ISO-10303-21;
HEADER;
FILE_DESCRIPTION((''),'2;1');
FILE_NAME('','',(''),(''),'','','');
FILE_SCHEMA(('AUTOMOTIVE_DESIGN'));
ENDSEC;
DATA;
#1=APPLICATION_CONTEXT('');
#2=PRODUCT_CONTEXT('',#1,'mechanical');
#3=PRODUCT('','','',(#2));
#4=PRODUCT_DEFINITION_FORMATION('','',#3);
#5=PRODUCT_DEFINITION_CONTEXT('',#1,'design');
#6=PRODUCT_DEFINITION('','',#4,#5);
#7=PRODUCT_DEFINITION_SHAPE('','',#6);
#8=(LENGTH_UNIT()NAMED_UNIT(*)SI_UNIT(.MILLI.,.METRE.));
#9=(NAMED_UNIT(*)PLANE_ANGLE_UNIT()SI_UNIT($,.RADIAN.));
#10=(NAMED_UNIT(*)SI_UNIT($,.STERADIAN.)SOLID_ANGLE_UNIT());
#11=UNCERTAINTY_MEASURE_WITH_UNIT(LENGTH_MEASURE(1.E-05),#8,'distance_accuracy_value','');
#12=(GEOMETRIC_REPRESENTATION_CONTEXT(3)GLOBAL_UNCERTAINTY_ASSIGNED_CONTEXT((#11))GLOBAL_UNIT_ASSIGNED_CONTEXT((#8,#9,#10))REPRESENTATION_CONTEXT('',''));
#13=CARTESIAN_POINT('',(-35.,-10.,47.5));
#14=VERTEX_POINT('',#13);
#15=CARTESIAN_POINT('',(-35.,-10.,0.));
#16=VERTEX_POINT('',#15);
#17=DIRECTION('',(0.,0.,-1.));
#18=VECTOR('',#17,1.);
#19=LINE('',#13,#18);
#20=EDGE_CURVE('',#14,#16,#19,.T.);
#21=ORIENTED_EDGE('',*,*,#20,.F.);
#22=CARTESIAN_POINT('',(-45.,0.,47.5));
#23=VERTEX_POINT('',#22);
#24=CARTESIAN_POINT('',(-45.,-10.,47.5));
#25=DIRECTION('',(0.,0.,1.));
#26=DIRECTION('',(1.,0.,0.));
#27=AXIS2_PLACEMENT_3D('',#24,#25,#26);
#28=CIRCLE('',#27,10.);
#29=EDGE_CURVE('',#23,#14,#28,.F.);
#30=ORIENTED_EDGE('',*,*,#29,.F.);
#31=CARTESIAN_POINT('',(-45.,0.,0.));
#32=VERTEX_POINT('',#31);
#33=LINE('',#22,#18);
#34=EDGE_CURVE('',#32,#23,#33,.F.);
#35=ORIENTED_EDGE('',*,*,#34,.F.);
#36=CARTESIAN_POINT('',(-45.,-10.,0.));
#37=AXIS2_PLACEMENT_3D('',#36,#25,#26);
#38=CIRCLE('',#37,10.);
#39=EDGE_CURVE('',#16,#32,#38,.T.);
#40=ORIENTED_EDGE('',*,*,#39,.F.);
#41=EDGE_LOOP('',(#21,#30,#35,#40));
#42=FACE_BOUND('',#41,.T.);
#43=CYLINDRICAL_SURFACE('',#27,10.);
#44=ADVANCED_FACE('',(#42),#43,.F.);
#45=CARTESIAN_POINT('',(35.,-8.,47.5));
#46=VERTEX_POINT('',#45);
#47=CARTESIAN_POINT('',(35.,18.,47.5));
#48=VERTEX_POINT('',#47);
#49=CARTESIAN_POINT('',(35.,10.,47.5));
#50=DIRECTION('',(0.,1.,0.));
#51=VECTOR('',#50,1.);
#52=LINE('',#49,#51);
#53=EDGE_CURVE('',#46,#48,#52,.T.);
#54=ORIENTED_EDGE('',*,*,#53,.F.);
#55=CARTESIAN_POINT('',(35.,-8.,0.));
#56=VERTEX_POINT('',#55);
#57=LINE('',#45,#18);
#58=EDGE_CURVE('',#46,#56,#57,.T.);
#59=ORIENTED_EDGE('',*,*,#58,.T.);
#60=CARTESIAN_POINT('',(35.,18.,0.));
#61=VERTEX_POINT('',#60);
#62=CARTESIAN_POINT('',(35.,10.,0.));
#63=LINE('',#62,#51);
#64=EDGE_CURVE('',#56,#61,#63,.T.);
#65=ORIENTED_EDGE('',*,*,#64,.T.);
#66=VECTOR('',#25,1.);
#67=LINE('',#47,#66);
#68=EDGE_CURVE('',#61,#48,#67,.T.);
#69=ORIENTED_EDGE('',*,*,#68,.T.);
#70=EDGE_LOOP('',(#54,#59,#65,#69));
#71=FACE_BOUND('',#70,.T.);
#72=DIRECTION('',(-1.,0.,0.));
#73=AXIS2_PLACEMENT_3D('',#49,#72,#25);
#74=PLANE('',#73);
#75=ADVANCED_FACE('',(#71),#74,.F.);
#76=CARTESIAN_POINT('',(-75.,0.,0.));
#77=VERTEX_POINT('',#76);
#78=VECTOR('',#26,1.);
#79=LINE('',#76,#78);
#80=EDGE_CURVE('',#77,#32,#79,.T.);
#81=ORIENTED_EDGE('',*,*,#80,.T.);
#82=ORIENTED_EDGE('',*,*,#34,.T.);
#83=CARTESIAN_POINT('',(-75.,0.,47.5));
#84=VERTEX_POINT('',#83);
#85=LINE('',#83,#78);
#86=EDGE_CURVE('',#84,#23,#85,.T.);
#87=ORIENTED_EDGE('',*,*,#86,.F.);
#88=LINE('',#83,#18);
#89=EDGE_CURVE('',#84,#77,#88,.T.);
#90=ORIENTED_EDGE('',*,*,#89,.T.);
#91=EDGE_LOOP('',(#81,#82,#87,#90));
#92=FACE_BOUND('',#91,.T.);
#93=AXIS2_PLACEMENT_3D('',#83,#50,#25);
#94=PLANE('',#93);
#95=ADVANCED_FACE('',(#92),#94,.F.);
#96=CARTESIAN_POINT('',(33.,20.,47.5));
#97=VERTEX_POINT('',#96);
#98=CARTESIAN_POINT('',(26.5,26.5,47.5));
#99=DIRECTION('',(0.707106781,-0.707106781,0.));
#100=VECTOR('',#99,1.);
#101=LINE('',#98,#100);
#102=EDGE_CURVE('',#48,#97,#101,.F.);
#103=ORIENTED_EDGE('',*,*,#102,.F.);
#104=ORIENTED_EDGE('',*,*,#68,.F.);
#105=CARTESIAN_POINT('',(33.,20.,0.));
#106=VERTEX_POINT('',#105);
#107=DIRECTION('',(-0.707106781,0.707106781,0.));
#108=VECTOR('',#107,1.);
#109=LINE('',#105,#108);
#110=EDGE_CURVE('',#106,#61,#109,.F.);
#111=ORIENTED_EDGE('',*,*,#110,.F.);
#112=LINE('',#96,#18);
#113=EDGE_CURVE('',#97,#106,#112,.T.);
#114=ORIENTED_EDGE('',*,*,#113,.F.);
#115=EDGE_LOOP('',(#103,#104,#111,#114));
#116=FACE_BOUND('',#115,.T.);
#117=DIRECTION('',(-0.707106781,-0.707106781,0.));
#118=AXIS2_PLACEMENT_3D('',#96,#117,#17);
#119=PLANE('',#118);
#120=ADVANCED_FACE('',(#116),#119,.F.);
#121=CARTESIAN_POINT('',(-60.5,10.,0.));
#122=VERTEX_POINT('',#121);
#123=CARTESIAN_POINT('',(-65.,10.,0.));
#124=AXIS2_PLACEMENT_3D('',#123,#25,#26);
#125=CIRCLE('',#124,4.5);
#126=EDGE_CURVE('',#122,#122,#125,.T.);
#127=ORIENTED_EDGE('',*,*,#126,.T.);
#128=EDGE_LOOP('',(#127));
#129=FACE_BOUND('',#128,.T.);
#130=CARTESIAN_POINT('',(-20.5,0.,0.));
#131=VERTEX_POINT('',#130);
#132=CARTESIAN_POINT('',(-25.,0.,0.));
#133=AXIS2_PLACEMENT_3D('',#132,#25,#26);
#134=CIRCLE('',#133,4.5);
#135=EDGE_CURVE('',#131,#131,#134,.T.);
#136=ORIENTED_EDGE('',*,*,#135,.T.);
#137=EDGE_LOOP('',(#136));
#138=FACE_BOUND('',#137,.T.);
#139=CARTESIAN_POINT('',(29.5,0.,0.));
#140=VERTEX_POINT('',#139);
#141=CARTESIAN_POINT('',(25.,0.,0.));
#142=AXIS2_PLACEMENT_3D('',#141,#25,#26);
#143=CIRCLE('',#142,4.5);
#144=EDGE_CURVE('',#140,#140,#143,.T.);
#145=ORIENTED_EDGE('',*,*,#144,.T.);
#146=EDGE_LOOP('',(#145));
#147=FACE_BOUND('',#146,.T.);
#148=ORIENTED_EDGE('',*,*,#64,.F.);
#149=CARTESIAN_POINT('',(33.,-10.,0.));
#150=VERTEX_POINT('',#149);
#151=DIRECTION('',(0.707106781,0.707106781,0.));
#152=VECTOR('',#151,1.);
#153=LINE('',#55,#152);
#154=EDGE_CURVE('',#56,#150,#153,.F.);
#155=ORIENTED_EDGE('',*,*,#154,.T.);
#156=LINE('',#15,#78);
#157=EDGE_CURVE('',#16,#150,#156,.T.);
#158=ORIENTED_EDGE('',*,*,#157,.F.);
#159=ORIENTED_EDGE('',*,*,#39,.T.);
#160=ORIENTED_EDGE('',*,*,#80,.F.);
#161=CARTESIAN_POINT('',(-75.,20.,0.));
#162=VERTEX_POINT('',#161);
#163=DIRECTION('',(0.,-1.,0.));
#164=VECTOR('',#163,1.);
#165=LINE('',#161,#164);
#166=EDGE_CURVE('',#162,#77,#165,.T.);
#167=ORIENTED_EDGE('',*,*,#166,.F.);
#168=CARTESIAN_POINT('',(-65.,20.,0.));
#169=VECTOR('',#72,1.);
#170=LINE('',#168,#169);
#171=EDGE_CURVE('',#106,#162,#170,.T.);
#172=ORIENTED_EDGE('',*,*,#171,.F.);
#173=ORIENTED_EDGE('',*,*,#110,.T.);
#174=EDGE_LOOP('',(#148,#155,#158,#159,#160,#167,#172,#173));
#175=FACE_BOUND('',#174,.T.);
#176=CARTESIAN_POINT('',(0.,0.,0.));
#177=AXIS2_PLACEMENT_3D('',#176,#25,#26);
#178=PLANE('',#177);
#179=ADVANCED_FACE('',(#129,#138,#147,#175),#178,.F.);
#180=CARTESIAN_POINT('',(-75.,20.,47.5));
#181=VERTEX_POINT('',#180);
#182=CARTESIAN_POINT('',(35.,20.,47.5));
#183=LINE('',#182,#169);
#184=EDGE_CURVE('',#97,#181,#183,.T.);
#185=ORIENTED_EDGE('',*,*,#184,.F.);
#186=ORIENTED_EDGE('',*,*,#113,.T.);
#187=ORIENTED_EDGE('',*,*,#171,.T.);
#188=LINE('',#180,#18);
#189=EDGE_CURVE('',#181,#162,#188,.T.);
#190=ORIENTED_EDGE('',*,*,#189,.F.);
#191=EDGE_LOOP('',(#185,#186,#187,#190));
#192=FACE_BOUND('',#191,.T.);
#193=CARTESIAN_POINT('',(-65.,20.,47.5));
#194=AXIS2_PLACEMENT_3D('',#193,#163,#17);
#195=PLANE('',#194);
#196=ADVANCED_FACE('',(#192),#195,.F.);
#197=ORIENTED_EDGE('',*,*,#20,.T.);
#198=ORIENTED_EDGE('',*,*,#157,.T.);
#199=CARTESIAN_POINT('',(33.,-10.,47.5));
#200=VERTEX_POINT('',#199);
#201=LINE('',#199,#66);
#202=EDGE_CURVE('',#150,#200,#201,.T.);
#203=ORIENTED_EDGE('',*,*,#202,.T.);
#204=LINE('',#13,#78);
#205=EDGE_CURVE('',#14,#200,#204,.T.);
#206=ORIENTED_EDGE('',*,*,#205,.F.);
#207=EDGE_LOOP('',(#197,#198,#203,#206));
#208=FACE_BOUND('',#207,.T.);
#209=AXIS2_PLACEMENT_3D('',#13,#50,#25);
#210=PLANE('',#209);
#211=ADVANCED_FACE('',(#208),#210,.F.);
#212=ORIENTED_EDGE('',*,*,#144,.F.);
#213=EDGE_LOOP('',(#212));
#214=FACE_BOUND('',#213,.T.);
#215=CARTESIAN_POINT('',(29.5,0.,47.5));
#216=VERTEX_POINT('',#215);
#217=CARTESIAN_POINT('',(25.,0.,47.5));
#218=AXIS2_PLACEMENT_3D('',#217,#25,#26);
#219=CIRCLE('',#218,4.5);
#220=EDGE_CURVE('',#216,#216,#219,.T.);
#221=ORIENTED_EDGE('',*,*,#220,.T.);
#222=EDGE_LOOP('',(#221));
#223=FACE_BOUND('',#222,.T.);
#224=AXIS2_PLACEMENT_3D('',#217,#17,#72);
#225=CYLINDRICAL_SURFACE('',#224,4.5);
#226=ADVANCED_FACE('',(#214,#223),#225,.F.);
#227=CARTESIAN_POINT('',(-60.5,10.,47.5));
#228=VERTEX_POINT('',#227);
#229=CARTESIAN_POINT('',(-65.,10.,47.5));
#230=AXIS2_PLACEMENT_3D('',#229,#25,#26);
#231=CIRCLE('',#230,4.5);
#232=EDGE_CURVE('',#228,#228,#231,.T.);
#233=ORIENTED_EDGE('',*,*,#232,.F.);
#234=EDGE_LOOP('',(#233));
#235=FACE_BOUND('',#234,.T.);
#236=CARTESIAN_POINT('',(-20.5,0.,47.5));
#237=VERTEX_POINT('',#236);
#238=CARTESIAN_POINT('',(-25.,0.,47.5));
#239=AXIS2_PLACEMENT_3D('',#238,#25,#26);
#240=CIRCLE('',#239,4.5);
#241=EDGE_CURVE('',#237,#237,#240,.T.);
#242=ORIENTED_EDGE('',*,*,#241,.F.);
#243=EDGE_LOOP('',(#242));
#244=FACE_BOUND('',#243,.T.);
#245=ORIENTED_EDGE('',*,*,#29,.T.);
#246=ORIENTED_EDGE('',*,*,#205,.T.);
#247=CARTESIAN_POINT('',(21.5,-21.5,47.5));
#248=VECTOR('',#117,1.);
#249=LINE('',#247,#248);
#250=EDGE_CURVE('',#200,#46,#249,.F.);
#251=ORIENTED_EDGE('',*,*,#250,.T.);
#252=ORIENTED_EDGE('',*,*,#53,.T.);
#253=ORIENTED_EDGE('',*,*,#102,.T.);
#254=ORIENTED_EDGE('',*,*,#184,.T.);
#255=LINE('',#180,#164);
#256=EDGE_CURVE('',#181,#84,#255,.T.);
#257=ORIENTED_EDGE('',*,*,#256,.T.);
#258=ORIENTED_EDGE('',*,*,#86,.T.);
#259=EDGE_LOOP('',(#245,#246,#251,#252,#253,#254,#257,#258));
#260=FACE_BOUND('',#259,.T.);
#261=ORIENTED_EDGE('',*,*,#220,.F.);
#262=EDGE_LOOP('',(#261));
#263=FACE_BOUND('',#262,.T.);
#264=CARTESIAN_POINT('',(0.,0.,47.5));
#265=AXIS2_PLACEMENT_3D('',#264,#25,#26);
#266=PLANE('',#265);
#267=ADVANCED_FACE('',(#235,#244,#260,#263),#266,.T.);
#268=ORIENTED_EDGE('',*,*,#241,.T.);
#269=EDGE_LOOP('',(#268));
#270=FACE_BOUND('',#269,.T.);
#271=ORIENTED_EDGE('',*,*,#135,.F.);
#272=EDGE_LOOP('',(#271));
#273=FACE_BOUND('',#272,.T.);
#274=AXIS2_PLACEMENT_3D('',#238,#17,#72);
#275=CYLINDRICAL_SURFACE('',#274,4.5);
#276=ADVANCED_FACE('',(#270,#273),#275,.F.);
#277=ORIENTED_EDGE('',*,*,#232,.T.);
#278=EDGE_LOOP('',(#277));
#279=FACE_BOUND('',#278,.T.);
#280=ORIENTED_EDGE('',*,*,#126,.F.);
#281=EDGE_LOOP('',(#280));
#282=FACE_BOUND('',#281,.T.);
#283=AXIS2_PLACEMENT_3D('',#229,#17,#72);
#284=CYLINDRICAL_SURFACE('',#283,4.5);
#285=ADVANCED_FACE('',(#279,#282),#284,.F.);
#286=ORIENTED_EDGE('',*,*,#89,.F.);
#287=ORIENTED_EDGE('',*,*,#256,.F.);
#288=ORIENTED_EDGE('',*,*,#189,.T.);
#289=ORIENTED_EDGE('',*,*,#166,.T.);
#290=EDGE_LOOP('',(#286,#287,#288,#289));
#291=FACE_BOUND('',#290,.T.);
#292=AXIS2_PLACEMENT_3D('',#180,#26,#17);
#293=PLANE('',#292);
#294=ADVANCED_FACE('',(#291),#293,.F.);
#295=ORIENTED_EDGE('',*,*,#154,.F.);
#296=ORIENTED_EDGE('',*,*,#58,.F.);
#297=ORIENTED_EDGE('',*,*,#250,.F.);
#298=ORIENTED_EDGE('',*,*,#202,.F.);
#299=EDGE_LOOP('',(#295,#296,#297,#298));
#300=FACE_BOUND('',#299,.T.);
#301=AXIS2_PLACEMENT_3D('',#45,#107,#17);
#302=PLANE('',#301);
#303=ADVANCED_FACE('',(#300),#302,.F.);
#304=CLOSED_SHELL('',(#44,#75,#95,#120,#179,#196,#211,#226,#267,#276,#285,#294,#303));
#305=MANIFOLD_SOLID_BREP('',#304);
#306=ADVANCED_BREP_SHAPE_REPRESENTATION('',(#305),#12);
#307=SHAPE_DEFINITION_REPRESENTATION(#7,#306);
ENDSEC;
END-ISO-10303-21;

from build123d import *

# Parameters (mm, degrees)
SKETCH_1_R      = 4.5
EXTRUDE_1_DEPTH = 47.5
FILLET_1_R      = 10
CHAMFER_1_SIZE  = 2


with BuildPart() as part:
    # 草图1 → 凸台-拉伸1 (new body)
    with BuildSketch(Plane.XY):
        Polygon((-35, 0), (-35, -10), (35, -10), (35, 10), (35, 20), (-35, 20), (-65, 20), (-75, 20), (-75, 0), align=None)
        with Locations((-25, 0)):
            Circle(SKETCH_1_R, mode=Mode.SUBTRACT)
        with Locations((25, 0)):
            Circle(SKETCH_1_R, mode=Mode.SUBTRACT)
        with Locations((-65, 10)):
            Circle(SKETCH_1_R, mode=Mode.SUBTRACT)
    extrude(amount=EXTRUDE_1_DEPTH)

    # 圆角1
    fillet_1_edges = [part.edges().sort_by_distance(p)[0] for p in [
        (-35, 0, 23.75),
    ]]
    fillet(fillet_1_edges, radius=FILLET_1_R - 0.0001)  # a hair under: the kernel refuses the full size

    # 倒角1
    chamfer_1_edges = [part.edges().sort_by_distance(p)[0] for p in [
        (35, -10, 23.75),
        (35, 20, 23.75),
    ]]
    chamfer(chamfer_1_edges, length=CHAMFER_1_SIZE)


solid = part.part
